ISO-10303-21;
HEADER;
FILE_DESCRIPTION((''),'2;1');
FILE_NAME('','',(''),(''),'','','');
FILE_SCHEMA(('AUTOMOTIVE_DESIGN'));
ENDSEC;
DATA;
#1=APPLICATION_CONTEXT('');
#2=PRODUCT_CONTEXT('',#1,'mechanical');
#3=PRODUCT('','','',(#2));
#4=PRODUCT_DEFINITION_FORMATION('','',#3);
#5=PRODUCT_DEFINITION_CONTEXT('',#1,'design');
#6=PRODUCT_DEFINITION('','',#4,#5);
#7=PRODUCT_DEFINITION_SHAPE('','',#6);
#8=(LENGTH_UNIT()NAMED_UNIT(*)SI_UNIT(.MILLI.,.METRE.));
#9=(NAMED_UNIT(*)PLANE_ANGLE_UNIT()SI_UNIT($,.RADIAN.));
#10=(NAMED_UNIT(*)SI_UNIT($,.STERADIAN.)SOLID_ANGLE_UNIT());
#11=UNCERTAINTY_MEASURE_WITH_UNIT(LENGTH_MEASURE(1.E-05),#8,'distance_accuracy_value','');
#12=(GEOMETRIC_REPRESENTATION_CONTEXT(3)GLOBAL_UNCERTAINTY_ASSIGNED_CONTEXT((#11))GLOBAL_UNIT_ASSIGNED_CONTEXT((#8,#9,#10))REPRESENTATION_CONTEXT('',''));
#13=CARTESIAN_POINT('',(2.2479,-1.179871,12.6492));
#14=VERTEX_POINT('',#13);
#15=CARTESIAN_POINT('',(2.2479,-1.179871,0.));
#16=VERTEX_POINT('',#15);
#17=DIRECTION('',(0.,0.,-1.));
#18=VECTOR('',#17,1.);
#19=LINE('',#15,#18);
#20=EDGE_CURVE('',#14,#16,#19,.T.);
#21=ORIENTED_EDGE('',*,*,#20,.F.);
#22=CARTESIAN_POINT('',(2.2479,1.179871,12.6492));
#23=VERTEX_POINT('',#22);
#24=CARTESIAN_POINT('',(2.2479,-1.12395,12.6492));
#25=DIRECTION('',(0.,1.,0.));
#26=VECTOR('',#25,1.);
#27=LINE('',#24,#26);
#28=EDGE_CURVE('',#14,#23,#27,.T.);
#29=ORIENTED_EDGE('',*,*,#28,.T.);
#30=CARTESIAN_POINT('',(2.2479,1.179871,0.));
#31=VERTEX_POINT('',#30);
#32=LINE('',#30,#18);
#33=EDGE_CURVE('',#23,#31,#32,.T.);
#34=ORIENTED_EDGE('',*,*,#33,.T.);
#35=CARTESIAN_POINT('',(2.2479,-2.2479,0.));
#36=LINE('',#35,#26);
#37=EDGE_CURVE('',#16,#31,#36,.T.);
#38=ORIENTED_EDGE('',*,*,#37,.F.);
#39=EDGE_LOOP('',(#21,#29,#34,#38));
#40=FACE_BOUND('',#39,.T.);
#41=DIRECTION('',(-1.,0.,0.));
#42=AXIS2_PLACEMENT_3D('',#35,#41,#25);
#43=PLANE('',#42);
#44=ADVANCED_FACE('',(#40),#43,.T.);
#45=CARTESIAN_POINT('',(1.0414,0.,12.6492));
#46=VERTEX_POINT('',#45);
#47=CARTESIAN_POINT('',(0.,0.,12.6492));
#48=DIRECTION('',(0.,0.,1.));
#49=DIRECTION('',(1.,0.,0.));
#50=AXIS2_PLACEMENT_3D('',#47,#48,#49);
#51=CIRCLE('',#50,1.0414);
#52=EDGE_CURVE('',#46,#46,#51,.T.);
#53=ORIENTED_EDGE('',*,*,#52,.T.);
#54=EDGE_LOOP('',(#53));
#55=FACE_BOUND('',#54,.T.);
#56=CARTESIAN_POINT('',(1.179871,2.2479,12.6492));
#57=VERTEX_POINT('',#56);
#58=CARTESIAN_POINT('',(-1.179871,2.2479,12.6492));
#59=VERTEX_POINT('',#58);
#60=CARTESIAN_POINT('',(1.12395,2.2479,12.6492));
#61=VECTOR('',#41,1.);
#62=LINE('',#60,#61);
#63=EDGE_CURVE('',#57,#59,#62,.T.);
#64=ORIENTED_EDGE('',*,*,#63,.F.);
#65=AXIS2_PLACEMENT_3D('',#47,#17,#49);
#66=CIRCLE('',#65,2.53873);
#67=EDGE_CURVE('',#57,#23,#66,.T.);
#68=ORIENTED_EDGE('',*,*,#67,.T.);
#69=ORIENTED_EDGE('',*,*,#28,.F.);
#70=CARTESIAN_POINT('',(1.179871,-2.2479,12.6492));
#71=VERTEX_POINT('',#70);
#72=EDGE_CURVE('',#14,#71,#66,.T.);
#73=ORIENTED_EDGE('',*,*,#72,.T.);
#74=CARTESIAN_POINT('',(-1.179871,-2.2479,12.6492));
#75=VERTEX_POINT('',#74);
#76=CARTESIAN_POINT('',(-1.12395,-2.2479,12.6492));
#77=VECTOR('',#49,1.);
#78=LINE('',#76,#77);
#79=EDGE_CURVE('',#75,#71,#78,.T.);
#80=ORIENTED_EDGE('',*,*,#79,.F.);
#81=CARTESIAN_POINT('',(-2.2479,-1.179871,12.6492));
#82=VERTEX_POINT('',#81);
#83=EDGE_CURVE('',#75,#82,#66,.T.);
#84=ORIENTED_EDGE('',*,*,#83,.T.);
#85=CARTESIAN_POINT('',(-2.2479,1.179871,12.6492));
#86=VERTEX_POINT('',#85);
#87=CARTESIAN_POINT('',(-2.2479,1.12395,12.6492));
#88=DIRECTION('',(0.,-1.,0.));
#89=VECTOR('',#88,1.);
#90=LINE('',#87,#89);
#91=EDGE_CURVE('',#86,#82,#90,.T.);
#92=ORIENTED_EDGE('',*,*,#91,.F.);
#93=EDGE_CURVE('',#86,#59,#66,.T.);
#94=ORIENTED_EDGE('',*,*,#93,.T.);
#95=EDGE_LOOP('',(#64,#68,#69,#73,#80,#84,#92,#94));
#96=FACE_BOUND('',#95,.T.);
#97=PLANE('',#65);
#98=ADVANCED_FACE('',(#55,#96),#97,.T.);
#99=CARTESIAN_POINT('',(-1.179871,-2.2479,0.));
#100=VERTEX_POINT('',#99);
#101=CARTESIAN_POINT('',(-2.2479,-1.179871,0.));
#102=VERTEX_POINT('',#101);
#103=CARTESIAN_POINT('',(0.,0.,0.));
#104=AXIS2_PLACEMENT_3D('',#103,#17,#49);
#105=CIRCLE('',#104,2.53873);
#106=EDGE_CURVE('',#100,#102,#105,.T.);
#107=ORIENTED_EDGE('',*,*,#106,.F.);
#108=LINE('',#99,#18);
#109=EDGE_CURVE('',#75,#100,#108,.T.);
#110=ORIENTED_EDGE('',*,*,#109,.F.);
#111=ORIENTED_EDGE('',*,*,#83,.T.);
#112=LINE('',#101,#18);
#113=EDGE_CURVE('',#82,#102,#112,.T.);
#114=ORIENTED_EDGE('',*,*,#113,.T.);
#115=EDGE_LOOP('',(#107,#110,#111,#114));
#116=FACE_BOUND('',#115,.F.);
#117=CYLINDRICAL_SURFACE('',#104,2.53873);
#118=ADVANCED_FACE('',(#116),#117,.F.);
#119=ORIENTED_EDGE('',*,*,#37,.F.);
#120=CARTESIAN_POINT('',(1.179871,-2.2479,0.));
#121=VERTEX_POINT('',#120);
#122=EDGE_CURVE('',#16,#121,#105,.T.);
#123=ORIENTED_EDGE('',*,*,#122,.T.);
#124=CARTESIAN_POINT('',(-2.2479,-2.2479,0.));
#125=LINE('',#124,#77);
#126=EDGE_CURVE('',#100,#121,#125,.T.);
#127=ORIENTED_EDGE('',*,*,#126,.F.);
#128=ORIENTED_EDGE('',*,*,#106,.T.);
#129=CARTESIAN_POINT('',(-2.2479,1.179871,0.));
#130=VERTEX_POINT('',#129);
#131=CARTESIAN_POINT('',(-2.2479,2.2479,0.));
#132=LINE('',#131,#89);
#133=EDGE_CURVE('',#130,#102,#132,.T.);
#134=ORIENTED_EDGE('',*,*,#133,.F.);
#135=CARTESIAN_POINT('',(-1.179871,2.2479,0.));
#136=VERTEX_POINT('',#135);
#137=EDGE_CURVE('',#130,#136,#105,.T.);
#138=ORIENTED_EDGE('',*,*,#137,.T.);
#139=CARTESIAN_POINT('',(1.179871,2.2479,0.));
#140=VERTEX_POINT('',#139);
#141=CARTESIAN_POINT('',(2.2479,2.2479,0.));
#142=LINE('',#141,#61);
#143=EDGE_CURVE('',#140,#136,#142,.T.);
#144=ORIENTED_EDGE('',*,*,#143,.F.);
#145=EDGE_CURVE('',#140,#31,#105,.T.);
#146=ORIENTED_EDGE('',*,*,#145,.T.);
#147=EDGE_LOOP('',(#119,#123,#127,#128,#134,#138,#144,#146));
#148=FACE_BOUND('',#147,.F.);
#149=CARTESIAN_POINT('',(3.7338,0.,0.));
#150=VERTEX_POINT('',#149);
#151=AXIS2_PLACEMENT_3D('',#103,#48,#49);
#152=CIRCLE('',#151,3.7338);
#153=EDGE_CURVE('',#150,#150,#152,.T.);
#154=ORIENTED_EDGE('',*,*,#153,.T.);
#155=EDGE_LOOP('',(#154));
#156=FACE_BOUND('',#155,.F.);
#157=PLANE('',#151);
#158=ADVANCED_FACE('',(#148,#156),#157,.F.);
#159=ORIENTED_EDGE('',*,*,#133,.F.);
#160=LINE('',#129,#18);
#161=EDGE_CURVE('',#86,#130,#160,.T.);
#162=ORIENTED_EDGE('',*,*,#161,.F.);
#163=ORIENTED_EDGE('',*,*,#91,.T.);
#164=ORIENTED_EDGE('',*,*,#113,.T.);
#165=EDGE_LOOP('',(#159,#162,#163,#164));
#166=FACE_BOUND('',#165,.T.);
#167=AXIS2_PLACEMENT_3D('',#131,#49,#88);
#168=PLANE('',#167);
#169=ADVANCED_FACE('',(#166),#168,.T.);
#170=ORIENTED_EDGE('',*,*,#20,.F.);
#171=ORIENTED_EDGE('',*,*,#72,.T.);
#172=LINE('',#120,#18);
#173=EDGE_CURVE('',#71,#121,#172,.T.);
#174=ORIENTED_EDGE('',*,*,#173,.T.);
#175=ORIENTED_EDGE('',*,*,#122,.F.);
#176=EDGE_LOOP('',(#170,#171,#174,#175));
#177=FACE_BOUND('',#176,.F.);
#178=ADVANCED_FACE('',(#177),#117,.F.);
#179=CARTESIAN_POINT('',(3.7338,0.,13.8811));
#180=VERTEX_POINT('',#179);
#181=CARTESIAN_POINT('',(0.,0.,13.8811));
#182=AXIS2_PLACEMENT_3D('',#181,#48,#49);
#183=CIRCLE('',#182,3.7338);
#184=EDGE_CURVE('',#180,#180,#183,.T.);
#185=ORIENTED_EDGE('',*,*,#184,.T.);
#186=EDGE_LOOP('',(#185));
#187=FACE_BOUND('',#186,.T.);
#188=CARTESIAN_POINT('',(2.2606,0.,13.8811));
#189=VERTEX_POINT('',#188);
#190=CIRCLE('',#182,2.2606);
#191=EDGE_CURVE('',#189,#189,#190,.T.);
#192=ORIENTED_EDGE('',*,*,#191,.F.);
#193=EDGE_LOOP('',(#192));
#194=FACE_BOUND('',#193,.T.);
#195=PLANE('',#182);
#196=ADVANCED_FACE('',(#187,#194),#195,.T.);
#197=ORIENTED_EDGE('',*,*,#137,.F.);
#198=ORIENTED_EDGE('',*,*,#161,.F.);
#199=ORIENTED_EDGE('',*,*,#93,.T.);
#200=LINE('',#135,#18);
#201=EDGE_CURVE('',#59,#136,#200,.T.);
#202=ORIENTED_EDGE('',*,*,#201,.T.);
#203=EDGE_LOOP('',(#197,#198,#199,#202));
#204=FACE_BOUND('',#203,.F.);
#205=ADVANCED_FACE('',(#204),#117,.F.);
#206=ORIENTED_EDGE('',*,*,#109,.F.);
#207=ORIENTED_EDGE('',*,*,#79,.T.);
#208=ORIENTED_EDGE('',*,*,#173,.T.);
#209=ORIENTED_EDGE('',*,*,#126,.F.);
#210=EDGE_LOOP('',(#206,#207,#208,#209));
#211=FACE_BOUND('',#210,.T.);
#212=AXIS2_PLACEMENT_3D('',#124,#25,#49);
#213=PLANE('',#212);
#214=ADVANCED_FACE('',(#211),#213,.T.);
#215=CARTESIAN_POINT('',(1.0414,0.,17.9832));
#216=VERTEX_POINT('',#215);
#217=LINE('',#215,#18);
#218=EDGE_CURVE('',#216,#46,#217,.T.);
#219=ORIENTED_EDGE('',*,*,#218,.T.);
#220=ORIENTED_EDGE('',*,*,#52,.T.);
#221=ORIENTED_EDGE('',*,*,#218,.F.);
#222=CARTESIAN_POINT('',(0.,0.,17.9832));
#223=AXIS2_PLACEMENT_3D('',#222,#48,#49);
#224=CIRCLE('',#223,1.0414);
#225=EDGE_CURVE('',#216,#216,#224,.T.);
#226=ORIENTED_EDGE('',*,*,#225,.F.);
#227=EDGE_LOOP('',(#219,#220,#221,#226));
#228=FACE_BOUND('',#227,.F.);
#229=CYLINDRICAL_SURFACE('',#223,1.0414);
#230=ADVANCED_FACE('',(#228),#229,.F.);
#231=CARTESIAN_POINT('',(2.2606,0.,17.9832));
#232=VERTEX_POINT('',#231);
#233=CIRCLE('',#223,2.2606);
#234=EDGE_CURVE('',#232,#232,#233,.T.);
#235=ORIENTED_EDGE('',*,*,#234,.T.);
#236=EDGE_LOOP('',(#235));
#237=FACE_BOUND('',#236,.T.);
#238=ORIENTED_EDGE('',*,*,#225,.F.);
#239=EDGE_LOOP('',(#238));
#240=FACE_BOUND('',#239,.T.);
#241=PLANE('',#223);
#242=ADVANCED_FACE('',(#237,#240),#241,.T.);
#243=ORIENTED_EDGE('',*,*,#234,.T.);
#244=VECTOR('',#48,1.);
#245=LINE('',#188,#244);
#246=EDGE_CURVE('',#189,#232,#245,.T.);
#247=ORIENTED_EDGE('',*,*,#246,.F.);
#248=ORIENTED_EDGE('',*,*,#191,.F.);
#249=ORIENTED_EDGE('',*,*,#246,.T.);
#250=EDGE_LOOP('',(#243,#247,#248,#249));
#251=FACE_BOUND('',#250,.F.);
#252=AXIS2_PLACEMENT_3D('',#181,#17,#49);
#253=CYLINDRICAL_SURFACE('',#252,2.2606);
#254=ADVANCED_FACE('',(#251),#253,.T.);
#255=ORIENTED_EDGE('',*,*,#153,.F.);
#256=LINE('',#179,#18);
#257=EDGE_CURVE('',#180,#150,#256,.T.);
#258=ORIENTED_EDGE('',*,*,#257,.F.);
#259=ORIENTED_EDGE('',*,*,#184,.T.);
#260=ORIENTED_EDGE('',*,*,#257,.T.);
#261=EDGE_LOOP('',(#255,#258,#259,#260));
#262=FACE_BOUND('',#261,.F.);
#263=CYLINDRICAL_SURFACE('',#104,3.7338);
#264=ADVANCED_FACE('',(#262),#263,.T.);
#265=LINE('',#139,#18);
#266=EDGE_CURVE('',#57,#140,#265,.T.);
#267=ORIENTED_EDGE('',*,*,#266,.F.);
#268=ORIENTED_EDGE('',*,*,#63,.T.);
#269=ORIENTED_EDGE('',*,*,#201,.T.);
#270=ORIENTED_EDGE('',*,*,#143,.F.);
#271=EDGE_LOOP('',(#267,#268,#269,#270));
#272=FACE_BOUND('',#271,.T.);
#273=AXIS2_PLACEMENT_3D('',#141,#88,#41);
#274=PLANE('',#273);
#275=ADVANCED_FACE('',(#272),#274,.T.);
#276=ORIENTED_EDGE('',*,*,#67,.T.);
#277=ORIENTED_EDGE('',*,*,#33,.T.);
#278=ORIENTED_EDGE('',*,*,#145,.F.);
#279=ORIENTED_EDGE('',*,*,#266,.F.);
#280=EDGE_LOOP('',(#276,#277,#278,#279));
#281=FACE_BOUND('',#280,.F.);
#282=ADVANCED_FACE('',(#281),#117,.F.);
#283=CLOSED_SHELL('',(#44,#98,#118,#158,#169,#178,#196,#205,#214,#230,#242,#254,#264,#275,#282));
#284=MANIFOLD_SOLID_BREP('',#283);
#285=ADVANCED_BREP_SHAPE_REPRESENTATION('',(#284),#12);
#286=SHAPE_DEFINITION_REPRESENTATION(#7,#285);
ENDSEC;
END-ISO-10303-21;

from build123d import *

# Parameters (mm, degrees)
F0_R     = 3.7338
F1_DEPTH = 13.8811
F2_R     = 2.2606
F3_DEPTH = 4.1021
F4_R     = 1.0414
F5_DEPTH = 47.0154
F6_R     = 2.53873
F7_DEPTH = 12.6492
F8_R     = 3.7338
F9_DEPTH = 13.5382


with BuildPart() as f1:
    # F0 (on Top) → F1 (new body)
    with BuildSketch(Plane.XY):
        Circle(F0_R)
    extrude(amount=F1_DEPTH)

    # F2 (on face) → F3 (join)
    with BuildSketch(Plane.XY.offset(13.8811)):
        Circle(F2_R)
    extrude(amount=F3_DEPTH)

    # F4 (on face) → F5 (cut)
    with BuildSketch(Plane.XY.offset(17.9832)):
        Circle(F4_R)
    extrude(amount=-F5_DEPTH, mode=Mode.SUBTRACT)

    # F6 (on face) → F7 (cut)
    with BuildSketch(Plane(origin=(0, 0, 0), x_dir=(1, 0, 0), z_dir=(0, 0, -1))):
        Circle(F6_R)
    extrude(amount=-F7_DEPTH, mode=Mode.SUBTRACT)

    # F8 (on face) → F9 (join)
    with BuildSketch(Plane(origin=(0, 0, 0), x_dir=(1, 0, 0), z_dir=(0, 0, -1))):
        Circle(F8_R)
        with BuildLine():
            Line((1.1798710111, 2.2479), (2.2479, 2.2479))
            Line((2.2479, 2.2479), (2.2479, 1.1798710111))
            ThreePointArc((2.2479, 1.1798710111), (2.4649504234, 0.6075931393), (2.53873, 0))
            ThreePointArc((2.53873, 0), (2.4649504234, -0.6075931393), (2.2479, -1.1798710111))
            Line((2.2479, -1.1798710111), (2.2479, -2.2479))
            Line((2.2479, -2.2479), (1.1798710111, -2.2479))
            ThreePointArc((1.1798710111, -2.2479), (0, -2.53873), (-1.1798710111, -2.2479))
            Line((-1.1798710111, -2.2479), (-2.2479, -2.2479))
            Line((-2.2479, -2.2479), (-2.2479, -1.1798710111))
            ThreePointArc((-2.2479, -1.1798710111), (-2.53873, 0), (-2.2479, 1.1798710111))
            Line((-2.2479, 1.1798710111), (-2.2479, 2.2479))
            Line((-2.2479, 2.2479), (-1.1798710111, 2.2479))
            ThreePointArc((-1.1798710111, 2.2479), (0, 2.53873), (1.1798710111, 2.2479))
        make_face(mode=Mode.SUBTRACT)
        with BuildLine():
            Line((-1.1798710111, 2.2479), (1.1798710111, 2.2479))
            ThreePointArc((1.1798710111, 2.2479), (0, 2.53873), (-1.1798710111, 2.2479))
        make_face()
        with BuildLine():
            ThreePointArc((2.53873, 0), (2.4649504234, 0.6075931393), (2.2479, 1.1798710111))
            Line((2.2479, 1.1798710111), (2.2479, -1.1798710111))
            ThreePointArc((2.2479, -1.1798710111), (2.4649504234, -0.6075931393), (2.53873, 0))
        make_face()
        with BuildLine():
            Line((-2.2479, -1.1798710111), (-2.2479, 1.1798710111))
            ThreePointArc((-2.2479, 1.1798710111), (-2.53873, 0), (-2.2479, -1.1798710111))
        make_face()
        with BuildLine():
            ThreePointArc((-1.1798710111, -2.2479), (0, -2.53873), (1.1798710111, -2.2479))
            Line((1.1798710111, -2.2479), (-1.1798710111, -2.2479))
        make_face()
    extrude(amount=-F9_DEPTH)


solid = f1.part
